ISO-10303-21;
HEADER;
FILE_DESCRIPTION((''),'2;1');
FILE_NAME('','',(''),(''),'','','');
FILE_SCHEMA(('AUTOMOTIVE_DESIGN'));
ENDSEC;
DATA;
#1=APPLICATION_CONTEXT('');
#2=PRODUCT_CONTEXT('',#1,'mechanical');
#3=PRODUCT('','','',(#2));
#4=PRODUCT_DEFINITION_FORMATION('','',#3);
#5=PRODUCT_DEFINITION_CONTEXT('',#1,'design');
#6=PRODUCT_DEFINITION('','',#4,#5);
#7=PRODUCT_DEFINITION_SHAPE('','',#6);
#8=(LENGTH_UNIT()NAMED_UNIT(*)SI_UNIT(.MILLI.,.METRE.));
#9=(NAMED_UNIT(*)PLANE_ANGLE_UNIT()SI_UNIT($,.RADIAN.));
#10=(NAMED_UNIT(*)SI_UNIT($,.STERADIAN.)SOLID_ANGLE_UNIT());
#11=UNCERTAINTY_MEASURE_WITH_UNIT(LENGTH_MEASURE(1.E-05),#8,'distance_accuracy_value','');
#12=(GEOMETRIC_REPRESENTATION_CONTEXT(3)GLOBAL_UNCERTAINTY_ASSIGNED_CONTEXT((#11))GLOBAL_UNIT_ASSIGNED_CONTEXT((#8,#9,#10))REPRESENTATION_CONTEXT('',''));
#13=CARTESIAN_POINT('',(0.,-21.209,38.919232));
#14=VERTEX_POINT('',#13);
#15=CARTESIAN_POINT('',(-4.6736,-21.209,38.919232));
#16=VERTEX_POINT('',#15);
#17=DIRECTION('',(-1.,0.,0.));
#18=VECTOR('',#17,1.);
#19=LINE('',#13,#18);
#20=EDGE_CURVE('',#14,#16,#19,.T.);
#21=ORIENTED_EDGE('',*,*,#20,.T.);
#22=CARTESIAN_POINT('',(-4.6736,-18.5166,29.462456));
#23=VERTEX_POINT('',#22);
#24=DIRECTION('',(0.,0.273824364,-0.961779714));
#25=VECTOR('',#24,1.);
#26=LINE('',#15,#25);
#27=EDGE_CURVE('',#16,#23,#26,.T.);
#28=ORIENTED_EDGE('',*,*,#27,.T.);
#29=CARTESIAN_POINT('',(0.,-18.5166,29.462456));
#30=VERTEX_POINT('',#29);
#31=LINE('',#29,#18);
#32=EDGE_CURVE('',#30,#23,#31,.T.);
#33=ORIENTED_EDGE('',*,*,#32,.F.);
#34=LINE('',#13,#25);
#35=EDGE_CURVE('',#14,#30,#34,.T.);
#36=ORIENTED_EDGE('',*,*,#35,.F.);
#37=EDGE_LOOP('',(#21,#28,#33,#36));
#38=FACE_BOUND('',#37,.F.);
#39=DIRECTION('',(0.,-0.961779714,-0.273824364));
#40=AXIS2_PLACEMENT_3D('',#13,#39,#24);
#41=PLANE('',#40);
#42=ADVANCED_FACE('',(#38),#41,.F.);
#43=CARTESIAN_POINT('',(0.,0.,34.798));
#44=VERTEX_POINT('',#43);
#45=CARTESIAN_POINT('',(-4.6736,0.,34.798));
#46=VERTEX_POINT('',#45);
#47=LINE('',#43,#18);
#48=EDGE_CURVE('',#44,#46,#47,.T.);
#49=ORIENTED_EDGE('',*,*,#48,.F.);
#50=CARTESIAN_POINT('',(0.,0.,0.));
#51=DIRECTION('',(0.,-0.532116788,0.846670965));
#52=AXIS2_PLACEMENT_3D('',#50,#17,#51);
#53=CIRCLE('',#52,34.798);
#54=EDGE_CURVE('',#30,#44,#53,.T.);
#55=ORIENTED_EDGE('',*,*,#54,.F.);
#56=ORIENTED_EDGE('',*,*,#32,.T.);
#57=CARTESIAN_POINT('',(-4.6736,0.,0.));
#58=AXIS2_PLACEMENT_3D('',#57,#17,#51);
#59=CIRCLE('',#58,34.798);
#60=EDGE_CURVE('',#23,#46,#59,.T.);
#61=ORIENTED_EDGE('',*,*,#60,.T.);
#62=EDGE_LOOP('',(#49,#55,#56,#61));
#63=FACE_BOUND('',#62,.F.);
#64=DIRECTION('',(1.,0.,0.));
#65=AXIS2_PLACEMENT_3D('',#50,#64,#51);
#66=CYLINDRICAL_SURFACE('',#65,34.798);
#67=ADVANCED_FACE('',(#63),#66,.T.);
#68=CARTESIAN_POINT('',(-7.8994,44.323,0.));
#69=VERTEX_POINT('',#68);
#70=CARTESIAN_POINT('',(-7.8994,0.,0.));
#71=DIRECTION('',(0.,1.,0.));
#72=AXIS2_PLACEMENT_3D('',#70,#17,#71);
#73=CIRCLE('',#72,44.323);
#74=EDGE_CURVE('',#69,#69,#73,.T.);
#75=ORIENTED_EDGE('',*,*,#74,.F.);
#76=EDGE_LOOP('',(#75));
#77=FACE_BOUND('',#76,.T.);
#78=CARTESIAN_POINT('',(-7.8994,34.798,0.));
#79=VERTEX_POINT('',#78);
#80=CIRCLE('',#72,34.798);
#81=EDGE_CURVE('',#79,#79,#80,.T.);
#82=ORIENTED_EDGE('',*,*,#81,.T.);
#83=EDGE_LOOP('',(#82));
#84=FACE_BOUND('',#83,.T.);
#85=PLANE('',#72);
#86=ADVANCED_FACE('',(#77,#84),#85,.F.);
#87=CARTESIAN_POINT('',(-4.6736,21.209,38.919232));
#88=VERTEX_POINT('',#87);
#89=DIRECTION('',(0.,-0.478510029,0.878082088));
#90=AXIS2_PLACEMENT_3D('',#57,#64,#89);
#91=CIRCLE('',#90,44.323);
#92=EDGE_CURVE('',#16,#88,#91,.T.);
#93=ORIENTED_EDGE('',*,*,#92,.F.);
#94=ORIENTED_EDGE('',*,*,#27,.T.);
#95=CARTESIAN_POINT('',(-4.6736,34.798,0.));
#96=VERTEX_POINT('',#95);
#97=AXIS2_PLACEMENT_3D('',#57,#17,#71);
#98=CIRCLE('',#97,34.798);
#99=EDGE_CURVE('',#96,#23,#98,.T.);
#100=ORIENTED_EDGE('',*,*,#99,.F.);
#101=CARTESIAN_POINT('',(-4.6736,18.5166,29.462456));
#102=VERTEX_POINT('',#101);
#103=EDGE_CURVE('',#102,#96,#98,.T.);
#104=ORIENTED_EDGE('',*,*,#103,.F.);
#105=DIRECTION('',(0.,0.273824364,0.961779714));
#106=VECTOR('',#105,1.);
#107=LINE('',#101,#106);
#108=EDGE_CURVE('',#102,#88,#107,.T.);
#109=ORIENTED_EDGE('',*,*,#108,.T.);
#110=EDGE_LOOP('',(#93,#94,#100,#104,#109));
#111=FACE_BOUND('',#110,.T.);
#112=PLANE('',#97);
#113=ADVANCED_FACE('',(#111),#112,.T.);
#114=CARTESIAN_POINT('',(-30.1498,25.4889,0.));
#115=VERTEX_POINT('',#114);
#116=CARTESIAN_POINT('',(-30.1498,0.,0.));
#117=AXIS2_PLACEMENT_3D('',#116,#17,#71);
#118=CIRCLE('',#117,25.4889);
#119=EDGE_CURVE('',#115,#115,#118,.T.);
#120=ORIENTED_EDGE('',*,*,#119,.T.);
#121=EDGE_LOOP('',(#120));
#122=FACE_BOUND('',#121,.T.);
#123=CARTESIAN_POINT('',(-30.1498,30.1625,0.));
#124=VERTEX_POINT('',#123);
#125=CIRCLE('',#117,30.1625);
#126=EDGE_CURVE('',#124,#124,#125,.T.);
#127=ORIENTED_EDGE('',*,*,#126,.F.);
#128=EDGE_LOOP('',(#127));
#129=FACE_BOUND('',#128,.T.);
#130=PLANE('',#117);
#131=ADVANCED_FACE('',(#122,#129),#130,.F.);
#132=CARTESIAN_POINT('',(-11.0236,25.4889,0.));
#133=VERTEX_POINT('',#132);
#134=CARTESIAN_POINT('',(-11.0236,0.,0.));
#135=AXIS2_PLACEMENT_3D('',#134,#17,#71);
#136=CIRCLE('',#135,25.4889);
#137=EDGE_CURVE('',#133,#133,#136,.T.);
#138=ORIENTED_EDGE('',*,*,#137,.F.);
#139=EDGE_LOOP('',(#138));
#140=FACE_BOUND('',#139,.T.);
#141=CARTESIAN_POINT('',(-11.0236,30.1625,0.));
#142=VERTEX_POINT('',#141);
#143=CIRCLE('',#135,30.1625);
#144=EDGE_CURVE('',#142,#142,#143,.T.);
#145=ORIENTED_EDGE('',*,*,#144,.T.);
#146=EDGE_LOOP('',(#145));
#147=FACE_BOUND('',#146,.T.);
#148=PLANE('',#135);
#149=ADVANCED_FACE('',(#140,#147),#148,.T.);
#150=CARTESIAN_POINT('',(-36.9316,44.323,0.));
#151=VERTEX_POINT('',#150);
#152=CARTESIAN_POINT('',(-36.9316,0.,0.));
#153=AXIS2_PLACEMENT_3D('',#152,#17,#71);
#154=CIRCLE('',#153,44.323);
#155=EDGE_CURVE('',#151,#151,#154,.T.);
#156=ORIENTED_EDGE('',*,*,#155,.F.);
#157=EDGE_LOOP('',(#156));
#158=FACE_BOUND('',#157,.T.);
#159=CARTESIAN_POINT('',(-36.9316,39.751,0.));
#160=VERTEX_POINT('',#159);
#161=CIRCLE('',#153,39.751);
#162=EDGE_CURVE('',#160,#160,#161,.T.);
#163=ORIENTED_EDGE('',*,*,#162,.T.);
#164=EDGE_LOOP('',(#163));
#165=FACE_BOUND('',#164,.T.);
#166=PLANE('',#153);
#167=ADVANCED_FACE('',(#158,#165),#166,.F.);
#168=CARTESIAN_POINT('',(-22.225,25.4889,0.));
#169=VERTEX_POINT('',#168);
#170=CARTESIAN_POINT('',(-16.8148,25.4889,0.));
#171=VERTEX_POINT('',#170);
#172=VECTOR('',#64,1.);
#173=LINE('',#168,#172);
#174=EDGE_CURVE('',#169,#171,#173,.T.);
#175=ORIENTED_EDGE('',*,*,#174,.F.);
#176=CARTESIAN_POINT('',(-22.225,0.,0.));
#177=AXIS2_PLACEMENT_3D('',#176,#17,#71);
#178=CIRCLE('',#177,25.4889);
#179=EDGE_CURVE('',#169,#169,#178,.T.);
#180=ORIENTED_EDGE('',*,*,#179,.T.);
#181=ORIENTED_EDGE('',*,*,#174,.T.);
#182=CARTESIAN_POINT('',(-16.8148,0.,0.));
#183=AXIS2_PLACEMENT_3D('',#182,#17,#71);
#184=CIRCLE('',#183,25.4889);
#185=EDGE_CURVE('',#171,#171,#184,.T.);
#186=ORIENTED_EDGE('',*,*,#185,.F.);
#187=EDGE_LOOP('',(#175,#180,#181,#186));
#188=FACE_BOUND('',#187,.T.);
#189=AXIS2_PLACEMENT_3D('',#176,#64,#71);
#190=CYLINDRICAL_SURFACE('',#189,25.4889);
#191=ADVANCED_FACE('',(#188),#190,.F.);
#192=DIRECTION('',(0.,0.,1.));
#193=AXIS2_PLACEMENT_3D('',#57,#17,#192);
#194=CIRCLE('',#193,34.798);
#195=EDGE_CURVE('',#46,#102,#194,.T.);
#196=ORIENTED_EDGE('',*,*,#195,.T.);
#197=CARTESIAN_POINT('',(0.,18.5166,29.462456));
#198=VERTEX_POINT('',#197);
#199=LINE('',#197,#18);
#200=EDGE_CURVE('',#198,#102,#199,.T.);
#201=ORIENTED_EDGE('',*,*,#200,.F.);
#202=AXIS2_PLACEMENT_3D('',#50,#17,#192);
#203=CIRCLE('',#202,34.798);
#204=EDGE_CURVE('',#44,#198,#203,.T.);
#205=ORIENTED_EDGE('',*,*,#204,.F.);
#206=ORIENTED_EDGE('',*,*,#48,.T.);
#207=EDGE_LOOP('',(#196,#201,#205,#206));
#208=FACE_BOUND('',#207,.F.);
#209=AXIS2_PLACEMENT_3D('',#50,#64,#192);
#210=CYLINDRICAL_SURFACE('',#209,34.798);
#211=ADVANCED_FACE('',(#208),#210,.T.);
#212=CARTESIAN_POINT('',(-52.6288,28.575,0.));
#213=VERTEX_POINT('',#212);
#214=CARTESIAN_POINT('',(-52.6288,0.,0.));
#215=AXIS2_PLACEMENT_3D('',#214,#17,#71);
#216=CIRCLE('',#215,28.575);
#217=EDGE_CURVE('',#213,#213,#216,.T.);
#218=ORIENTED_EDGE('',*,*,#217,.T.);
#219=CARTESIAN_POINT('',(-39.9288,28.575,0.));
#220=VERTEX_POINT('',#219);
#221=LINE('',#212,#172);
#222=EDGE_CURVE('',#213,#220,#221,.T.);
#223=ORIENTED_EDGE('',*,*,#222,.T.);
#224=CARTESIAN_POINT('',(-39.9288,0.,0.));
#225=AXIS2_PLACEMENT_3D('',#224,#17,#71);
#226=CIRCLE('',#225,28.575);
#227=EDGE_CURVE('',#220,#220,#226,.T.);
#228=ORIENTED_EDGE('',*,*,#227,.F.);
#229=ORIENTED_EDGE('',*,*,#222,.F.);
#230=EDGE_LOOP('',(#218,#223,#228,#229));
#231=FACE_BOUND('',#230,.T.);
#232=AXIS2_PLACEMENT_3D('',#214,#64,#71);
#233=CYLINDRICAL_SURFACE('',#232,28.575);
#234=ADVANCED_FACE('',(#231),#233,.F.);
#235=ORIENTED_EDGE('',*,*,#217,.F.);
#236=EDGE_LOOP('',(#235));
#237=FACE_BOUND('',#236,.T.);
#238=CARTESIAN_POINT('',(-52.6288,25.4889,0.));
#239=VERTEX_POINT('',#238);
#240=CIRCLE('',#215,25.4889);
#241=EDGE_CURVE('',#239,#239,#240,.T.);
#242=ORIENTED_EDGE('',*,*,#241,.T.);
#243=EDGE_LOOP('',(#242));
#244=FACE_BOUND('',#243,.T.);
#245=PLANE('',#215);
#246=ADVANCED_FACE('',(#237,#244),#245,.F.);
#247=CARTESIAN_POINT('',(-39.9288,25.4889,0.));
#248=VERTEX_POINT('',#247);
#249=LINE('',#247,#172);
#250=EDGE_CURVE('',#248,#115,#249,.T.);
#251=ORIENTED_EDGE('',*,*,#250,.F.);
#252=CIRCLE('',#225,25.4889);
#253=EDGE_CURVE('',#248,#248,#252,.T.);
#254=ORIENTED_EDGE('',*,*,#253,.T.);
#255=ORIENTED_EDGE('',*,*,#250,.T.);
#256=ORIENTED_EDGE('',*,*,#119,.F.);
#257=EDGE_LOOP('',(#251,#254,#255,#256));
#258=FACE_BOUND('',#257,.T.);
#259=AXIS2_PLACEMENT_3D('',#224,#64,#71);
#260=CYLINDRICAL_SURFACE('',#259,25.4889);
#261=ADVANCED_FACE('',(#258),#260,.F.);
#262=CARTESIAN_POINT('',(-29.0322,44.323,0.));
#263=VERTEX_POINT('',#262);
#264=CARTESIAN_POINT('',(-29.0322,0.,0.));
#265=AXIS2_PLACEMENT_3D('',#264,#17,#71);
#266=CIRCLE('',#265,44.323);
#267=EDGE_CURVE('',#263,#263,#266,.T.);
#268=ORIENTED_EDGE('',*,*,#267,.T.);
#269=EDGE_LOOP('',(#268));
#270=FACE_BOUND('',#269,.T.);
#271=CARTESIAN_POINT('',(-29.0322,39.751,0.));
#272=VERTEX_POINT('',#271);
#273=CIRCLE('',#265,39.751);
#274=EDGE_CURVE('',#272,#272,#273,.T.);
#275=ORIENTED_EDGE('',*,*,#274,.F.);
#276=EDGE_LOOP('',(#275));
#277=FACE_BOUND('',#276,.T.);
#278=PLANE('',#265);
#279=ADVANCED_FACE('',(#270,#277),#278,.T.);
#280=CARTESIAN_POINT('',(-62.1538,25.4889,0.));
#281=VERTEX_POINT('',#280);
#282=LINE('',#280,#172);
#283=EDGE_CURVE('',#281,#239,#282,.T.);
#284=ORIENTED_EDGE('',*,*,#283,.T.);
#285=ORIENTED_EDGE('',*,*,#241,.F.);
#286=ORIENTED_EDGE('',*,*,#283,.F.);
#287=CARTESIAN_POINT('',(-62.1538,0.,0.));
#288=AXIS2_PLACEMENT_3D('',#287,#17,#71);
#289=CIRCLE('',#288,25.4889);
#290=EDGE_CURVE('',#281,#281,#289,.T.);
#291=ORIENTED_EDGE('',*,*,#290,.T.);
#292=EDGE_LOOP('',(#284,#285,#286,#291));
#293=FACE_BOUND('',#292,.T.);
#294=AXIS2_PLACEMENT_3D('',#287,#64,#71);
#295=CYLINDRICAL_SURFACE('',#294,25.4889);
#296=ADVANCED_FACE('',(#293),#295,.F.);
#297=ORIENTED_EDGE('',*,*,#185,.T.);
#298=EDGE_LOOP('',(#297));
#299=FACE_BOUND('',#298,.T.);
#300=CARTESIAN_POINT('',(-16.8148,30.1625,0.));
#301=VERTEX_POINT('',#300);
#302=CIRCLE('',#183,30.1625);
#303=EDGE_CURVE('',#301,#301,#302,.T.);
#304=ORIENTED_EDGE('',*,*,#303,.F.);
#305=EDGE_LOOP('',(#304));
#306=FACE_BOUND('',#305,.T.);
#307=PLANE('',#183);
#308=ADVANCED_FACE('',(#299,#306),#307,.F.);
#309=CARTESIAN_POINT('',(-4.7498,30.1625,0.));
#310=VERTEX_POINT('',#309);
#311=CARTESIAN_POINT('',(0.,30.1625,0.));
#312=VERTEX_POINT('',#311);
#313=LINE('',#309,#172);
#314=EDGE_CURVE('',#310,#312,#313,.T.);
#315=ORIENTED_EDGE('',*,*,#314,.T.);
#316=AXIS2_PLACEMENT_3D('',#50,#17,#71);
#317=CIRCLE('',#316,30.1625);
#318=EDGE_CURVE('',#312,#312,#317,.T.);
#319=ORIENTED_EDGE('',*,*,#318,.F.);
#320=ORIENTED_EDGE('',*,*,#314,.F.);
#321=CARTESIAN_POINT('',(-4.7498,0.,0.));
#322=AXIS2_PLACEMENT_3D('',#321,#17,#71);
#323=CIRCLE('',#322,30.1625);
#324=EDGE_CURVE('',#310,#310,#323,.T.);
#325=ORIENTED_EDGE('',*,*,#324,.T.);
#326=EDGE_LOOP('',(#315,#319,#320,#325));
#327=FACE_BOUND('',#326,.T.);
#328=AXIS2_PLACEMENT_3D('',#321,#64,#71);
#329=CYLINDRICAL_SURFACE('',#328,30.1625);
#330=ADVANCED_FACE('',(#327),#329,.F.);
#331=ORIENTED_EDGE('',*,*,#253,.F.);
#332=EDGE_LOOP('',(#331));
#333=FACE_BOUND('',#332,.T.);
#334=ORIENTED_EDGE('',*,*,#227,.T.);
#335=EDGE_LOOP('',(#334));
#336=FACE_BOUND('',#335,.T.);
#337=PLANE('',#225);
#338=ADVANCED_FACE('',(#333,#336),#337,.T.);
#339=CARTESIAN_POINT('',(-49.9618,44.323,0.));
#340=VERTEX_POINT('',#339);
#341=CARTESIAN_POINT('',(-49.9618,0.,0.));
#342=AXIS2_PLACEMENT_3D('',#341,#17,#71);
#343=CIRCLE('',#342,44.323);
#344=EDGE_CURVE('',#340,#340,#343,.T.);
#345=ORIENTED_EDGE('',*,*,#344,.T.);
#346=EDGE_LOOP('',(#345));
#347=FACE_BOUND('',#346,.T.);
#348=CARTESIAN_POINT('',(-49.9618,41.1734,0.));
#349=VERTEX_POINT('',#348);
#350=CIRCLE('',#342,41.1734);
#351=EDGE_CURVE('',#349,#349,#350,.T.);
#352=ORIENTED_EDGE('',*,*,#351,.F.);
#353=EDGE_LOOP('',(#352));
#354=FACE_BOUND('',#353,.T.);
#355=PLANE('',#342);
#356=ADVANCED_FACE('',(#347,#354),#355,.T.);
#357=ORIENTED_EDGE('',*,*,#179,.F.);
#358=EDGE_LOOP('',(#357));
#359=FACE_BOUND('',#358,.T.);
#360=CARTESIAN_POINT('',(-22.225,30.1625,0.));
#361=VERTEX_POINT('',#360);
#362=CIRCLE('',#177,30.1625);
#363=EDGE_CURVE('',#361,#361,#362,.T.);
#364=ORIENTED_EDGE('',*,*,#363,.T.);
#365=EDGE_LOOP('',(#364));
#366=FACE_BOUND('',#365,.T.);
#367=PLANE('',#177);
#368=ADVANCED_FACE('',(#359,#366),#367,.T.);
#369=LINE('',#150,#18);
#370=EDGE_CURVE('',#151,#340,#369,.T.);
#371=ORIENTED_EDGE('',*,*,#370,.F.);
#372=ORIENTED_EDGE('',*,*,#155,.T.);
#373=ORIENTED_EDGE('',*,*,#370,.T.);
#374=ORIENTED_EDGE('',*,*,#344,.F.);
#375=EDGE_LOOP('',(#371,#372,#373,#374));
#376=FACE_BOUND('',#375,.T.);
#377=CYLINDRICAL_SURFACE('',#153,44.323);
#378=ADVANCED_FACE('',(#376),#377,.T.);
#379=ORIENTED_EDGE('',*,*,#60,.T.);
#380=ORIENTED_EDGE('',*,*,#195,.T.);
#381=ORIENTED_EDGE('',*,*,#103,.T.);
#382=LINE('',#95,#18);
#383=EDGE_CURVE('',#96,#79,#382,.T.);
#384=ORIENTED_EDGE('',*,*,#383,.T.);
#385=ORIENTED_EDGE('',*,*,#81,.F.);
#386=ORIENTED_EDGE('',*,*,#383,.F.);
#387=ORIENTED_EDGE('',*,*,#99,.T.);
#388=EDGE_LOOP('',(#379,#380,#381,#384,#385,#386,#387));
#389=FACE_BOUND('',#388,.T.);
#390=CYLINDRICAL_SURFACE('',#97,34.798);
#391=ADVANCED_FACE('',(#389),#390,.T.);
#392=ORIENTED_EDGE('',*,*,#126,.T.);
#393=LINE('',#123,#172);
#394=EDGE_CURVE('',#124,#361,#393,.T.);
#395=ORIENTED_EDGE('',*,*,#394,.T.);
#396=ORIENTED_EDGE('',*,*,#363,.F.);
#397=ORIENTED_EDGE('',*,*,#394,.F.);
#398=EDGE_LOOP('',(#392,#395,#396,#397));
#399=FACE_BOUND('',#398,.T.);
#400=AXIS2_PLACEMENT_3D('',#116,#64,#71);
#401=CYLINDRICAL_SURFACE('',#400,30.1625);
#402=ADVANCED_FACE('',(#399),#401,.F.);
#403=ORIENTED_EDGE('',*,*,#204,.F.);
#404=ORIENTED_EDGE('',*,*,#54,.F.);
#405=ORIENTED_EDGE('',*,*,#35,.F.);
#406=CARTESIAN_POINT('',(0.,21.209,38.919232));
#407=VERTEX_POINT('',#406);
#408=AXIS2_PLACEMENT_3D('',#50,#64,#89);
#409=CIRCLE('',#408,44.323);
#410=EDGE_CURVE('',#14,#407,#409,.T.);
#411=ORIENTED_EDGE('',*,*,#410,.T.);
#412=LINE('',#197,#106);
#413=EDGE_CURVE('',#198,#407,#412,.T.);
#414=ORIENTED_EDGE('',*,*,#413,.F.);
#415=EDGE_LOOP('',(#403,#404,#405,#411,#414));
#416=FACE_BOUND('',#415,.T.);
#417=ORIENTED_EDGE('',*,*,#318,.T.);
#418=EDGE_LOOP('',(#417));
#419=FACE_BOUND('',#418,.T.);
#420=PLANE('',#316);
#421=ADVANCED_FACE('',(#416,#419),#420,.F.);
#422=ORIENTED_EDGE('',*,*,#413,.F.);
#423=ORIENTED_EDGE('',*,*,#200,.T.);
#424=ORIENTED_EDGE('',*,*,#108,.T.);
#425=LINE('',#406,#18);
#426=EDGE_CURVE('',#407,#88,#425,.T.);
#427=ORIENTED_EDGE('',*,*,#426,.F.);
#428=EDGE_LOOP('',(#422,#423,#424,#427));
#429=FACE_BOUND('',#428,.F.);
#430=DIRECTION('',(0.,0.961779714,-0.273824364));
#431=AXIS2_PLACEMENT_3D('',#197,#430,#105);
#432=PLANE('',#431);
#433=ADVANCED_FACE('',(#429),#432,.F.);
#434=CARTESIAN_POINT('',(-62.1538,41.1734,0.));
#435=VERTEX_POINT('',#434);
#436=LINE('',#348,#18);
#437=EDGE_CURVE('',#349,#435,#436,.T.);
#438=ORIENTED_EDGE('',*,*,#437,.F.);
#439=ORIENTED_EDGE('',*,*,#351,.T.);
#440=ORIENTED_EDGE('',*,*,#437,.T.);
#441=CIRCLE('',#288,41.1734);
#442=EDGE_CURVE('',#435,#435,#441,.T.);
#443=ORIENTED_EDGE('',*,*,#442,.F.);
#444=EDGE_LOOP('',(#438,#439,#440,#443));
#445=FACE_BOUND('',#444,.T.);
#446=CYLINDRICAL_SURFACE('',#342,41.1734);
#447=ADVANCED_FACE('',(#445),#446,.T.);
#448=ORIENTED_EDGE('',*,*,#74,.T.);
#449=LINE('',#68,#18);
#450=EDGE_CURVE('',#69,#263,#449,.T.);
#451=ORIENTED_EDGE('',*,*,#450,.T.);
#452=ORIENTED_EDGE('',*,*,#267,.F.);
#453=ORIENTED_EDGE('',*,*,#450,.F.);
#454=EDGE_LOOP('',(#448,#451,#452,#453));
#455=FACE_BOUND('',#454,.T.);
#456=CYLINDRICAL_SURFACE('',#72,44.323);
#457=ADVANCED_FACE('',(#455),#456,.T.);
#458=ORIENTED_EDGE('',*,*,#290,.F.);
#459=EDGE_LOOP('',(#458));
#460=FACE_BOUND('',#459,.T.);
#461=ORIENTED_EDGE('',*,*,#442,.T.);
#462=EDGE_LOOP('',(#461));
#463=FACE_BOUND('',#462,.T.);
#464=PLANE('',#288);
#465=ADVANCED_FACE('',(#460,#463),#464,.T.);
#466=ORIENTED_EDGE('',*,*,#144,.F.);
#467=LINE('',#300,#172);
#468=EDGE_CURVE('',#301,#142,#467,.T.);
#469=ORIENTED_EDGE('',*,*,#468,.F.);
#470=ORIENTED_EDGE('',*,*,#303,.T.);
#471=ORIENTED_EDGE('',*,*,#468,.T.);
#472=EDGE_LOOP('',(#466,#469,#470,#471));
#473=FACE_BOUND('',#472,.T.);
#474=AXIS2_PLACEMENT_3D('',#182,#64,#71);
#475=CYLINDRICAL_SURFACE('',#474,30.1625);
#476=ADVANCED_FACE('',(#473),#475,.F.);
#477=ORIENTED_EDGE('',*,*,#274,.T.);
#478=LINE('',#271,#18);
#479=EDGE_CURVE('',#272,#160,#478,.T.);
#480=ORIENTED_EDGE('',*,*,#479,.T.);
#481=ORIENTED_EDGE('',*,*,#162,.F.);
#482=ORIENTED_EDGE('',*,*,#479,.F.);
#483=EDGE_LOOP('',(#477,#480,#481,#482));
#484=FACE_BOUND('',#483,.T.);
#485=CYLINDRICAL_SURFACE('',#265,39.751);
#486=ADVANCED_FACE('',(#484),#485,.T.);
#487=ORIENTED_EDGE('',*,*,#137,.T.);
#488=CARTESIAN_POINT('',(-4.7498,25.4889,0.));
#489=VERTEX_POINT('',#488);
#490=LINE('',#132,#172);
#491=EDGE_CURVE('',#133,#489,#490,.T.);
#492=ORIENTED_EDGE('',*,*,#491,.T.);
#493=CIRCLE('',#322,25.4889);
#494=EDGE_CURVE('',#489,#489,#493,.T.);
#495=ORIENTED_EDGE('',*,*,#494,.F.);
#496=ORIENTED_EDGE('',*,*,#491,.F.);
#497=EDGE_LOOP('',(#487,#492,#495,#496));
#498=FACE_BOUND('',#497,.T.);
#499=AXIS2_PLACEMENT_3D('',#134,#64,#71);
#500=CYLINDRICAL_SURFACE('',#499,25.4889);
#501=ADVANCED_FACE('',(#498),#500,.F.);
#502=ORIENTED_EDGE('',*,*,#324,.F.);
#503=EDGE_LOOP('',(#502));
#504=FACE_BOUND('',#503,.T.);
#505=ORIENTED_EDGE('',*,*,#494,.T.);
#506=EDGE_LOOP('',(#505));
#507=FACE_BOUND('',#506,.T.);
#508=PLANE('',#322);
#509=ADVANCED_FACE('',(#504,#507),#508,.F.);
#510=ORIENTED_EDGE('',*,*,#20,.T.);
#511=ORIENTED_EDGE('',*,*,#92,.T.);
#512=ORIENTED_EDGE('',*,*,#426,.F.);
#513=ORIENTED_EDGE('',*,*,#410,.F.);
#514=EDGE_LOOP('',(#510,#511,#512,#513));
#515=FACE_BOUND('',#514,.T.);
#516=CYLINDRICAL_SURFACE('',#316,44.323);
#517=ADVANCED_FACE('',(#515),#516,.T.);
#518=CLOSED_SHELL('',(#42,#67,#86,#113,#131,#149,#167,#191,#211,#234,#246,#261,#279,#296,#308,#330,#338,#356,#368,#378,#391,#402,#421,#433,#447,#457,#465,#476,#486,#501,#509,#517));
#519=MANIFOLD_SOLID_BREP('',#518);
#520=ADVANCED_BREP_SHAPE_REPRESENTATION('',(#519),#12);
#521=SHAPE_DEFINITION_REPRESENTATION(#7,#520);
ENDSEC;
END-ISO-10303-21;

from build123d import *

# Parameters (mm, degrees)
F3_DEPTH = 4.6736


# Not quite as in the source:
# - after a boolean that leaves OpenCascade's solid faulty, fix() repairs it


with BuildPart() as f1:
    # F0 (on Top) → F1 (revolve)
    with BuildSketch(Plane.XY):
        Polygon((-4.7498, 30.1625), (0, 30.1625), (0, 44.323), (-4.6736, 44.323), (-4.6736, 34.798), (-7.8994, 34.798), (-7.8994, 44.323), (-29.0322, 44.323), (-29.0322, 39.751), (-36.9316, 39.751), (-36.9316, 44.323), (-49.9618, 44.323), (-49.9618, 41.1734), (-62.1538, 41.1734), (-62.1538, 25.4889), (-52.6288, 25.4889), (-52.6288, 28.575), (-39.9288, 28.575), (-39.9288, 25.4889), (-30.1498, 25.4889), (-30.1498, 30.1625), (-22.225, 30.1625), (-22.225, 25.4889), (-16.8148, 25.4889), (-16.8148, 30.1625), (-11.0236, 30.1625), (-11.0236, 25.4889), (-4.7498, 25.4889), align=None)
    revolve(axis=Axis((-31.0769, 0, 0), (-1, 0, 0)))

    # F2 (on face) → F3 (cut)
    with BuildSketch(Plane.YZ):
        with BuildLine():
            ThreePointArc((-18.5166, 29.4624562527), (-9.6349948448, 33.4375190219), (0, 34.798))
            Line((0, 34.798), (0, 44.323))
            ThreePointArc((0, 44.323), (-10.9432900176, 42.950817601), (-21.209, 38.9192323665))
            Line((-21.209, 38.9192323665), (-18.5166, 29.4624562527))
        make_face()
        with BuildLine():
            Line((0, 44.323), (0, 34.798))
            ThreePointArc((0, 34.798), (9.6349948448, 33.4375190219), (18.5166, 29.4624562527))
            Line((18.5166, 29.4624562527), (21.209, 38.9192323665))
            ThreePointArc((21.209, 38.9192323665), (10.9432900176, 42.950817601), (0, 44.323))
        make_face()
    extrude(amount=-F3_DEPTH, mode=Mode.SUBTRACT)

    add(f1.part.fix(), mode=Mode.REPLACE)


solid = f1.part
